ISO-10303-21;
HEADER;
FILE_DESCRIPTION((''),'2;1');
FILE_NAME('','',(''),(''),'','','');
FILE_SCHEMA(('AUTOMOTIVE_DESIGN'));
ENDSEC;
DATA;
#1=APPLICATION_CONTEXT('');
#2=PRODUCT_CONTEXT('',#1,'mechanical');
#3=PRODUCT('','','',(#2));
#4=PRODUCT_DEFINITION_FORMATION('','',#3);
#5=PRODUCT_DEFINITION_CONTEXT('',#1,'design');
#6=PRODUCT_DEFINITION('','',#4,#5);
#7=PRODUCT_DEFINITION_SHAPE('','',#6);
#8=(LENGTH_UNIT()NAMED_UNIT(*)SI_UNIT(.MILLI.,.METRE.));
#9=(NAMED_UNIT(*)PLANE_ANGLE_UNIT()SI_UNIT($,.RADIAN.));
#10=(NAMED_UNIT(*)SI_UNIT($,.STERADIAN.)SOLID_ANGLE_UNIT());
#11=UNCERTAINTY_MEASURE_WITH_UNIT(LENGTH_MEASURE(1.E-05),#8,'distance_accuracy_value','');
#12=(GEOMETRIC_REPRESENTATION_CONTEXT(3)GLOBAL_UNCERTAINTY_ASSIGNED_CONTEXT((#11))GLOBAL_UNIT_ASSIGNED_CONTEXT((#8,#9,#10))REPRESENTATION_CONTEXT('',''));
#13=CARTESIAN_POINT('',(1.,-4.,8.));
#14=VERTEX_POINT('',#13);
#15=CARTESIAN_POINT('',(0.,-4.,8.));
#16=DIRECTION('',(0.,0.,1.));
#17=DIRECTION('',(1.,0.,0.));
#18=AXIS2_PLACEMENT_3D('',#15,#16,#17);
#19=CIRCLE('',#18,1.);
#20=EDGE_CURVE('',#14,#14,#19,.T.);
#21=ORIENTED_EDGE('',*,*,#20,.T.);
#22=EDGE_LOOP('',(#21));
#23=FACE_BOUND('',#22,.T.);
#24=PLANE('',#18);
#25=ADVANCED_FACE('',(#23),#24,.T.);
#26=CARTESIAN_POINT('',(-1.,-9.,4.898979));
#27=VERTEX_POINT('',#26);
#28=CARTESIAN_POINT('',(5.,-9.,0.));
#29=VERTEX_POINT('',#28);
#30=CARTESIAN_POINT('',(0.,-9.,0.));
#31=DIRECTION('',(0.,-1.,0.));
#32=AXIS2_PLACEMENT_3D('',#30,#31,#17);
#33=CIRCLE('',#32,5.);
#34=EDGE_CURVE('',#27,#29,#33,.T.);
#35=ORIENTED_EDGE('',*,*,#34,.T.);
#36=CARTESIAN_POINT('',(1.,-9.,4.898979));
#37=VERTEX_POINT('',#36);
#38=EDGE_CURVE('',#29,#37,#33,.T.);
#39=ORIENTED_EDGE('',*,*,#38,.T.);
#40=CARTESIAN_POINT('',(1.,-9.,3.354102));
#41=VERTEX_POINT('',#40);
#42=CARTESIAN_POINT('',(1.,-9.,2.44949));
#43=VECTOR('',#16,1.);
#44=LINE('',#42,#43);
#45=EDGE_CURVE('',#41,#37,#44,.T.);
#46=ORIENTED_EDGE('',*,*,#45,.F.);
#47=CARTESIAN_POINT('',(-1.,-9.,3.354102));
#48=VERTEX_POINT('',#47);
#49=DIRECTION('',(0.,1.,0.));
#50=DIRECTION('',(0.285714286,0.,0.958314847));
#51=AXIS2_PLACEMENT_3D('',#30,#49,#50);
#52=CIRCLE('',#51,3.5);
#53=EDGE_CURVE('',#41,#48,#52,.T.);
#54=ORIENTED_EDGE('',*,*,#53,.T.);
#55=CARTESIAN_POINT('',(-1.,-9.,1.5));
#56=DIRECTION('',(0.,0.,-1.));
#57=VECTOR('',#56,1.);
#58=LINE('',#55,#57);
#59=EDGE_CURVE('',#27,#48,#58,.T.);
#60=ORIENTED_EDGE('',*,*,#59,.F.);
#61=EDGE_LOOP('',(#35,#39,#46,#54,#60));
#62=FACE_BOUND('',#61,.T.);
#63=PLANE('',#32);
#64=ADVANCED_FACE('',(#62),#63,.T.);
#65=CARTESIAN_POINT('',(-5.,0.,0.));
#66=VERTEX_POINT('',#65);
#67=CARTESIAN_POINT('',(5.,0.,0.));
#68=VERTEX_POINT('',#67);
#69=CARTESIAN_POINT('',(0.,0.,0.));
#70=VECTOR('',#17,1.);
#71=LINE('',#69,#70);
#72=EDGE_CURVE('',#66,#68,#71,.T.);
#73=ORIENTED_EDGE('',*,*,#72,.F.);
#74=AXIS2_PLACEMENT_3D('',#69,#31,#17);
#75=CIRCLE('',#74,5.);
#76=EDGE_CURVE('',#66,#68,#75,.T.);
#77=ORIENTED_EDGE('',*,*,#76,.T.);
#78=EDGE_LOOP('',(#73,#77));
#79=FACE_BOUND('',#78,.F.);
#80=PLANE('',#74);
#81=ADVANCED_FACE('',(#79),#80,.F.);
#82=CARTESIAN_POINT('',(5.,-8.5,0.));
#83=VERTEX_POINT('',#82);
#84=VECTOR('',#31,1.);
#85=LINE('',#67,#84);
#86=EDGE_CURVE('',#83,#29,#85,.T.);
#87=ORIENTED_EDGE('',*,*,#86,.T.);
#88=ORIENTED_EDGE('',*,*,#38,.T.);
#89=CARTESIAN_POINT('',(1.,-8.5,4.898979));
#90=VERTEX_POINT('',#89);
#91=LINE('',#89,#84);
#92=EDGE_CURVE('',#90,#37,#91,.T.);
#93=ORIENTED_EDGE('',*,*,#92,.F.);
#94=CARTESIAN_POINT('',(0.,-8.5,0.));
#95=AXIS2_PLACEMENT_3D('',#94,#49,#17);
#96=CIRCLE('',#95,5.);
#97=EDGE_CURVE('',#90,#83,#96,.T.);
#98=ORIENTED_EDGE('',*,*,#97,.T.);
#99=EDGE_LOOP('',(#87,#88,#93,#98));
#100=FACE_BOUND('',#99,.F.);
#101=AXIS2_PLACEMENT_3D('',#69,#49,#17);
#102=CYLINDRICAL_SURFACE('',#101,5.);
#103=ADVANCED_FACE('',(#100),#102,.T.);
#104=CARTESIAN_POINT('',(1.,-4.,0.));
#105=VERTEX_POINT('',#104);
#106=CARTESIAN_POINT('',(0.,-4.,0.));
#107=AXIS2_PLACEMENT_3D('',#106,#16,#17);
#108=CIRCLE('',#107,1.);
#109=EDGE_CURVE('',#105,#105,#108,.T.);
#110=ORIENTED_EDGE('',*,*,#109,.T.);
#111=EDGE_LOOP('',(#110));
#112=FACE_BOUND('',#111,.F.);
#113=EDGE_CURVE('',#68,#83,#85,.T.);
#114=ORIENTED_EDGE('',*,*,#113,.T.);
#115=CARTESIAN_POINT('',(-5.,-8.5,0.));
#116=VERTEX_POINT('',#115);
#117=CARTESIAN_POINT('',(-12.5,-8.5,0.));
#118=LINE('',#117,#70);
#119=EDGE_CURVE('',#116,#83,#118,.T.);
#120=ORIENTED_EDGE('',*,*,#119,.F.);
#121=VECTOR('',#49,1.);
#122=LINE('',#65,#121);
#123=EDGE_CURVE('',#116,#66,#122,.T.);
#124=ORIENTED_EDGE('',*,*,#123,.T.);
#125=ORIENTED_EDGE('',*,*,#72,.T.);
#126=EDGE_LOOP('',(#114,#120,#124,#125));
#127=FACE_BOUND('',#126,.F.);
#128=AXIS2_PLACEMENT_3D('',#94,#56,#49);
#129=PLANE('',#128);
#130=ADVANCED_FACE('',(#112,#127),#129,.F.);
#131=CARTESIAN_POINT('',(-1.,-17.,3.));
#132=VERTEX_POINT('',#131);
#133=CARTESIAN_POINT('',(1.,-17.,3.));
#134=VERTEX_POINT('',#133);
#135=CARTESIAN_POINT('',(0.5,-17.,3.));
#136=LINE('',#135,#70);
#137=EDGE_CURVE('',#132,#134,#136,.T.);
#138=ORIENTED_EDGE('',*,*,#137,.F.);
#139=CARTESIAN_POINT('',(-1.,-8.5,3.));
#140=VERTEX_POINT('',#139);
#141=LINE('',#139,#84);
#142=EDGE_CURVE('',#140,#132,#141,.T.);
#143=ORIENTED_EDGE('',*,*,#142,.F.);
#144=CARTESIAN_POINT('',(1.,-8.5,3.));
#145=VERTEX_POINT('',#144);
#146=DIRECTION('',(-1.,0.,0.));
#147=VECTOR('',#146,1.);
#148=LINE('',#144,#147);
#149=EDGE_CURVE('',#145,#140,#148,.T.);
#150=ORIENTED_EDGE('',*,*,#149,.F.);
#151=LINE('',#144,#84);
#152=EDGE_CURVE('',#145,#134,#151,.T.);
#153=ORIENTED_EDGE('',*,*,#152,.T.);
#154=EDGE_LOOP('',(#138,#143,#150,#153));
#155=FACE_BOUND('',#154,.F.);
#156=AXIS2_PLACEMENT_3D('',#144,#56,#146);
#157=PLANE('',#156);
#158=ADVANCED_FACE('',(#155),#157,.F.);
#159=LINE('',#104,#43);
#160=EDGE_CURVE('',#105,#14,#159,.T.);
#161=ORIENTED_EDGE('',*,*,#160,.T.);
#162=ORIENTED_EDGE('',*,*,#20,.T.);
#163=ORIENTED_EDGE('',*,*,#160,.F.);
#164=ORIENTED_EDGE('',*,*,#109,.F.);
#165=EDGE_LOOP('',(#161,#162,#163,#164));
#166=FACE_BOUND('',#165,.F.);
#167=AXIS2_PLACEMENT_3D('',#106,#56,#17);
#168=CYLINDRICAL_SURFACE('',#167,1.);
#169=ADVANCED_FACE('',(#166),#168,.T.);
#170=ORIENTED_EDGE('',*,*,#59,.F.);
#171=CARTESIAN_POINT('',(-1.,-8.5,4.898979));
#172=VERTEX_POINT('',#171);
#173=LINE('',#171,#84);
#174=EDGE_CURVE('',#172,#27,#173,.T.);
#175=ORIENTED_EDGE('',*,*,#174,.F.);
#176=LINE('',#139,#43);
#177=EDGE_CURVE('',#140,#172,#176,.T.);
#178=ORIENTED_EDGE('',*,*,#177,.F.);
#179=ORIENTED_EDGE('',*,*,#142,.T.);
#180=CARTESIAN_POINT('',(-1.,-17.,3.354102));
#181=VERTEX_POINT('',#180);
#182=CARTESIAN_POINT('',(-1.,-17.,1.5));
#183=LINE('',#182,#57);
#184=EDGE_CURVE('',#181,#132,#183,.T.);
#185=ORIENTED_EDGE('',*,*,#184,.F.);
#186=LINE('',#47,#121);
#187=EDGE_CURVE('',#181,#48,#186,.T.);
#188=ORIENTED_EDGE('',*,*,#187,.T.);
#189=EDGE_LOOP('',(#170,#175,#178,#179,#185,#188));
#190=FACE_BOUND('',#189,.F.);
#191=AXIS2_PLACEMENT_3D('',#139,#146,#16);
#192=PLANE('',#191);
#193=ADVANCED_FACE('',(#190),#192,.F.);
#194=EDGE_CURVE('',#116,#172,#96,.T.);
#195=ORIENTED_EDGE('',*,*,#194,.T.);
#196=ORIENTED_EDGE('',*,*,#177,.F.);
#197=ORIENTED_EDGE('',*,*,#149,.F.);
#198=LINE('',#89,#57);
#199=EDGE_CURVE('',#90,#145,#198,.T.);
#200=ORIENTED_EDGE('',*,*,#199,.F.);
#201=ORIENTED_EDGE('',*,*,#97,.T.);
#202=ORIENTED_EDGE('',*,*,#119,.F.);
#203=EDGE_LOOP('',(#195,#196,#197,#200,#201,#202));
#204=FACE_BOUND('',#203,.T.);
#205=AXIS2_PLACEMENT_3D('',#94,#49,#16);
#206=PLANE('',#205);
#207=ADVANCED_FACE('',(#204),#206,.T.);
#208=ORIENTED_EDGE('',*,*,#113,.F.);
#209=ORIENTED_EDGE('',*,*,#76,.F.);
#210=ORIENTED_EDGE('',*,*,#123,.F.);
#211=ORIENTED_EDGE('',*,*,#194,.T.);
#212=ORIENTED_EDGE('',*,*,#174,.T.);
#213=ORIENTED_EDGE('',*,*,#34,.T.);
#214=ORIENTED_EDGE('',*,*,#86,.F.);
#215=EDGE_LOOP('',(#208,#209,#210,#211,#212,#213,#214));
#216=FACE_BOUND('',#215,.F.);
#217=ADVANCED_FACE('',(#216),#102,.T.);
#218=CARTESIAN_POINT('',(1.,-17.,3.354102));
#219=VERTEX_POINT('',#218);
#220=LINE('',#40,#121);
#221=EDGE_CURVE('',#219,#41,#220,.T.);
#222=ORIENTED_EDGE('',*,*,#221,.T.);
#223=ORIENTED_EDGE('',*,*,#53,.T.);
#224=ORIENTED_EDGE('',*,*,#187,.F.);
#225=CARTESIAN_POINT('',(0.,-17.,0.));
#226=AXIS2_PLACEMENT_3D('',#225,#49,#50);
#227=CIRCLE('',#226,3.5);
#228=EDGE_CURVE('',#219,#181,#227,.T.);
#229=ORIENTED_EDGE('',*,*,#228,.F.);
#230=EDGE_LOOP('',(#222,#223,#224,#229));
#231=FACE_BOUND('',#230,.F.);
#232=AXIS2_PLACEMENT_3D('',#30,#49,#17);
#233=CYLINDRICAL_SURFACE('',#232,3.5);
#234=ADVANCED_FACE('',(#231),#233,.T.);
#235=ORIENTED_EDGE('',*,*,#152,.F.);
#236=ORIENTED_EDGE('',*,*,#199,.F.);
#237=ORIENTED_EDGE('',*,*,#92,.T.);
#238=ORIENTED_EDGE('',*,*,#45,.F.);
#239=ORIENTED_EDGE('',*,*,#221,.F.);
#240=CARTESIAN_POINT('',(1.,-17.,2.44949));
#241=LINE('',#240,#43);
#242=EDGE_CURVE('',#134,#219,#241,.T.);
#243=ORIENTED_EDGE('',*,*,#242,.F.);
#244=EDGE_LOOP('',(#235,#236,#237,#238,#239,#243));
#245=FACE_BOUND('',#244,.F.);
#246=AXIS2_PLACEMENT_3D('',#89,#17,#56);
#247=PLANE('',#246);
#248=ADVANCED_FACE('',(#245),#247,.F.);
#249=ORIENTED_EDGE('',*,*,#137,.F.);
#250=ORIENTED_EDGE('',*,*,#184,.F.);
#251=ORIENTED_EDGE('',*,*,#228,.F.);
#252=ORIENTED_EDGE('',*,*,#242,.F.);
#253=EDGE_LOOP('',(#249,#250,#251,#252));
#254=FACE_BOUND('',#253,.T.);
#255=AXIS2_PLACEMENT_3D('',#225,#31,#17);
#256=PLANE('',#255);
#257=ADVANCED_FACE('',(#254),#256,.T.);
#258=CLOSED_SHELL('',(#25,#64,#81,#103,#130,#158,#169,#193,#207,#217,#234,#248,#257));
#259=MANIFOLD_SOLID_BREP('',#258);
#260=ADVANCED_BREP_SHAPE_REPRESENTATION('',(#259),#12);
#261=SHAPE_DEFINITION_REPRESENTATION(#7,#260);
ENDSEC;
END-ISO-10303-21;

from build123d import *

# Parameters (mm, degrees)
F0_R     = 5
F1_DEPTH = 9
F2_R     = 3.5
F3_DEPTH = 8
F4_W     = 9.3990088471
F4_H     = 6
F5_DEPTH = 12.5
F7_DEPTH = 25
F8_R     = 1
F9_DEPTH = 8


with BuildPart() as f1:
    # F0 (on Front) → F1 (new body)
    with BuildSketch(Plane.XZ):
        Circle(F0_R)
    extrude(amount=F1_DEPTH)

    # F2 (on face) → F3 (join)
    with BuildSketch(Plane.XZ.offset(9)):
        Circle(F2_R)
    extrude(amount=F3_DEPTH)

    # F4 (on Right) → F5 (cut, symmetric)
    with BuildSketch(Plane.YZ):
        with Locations((-3.8004955764, 3)):
            Rectangle(F4_W, F4_H)
    extrude(amount=F5_DEPTH, both=True, mode=Mode.SUBTRACT)

    # F6 (on face) → F7 (cut)
    with BuildSketch(Plane(origin=(0, -8.5, 0), x_dir=(-1, 0, 0), z_dir=(0, 1, 0))):
        with BuildLine():
            Line((-1, 3), (1, 3))
            Line((1, 3), (1, 4.8989794856))
            ThreePointArc((1, 4.8989794856), (0, 5), (-1, 4.8989794856))
            Line((-1, 4.8989794856), (-1, 3))
        make_face()
    extrude(amount=-F7_DEPTH, mode=Mode.SUBTRACT)

    # F8 (on face) → F9 (join)
    with BuildSketch(Plane.XY):
        with Locations((0, -4)):
            Circle(F8_R)
    extrude(amount=F9_DEPTH)


solid = f1.part
